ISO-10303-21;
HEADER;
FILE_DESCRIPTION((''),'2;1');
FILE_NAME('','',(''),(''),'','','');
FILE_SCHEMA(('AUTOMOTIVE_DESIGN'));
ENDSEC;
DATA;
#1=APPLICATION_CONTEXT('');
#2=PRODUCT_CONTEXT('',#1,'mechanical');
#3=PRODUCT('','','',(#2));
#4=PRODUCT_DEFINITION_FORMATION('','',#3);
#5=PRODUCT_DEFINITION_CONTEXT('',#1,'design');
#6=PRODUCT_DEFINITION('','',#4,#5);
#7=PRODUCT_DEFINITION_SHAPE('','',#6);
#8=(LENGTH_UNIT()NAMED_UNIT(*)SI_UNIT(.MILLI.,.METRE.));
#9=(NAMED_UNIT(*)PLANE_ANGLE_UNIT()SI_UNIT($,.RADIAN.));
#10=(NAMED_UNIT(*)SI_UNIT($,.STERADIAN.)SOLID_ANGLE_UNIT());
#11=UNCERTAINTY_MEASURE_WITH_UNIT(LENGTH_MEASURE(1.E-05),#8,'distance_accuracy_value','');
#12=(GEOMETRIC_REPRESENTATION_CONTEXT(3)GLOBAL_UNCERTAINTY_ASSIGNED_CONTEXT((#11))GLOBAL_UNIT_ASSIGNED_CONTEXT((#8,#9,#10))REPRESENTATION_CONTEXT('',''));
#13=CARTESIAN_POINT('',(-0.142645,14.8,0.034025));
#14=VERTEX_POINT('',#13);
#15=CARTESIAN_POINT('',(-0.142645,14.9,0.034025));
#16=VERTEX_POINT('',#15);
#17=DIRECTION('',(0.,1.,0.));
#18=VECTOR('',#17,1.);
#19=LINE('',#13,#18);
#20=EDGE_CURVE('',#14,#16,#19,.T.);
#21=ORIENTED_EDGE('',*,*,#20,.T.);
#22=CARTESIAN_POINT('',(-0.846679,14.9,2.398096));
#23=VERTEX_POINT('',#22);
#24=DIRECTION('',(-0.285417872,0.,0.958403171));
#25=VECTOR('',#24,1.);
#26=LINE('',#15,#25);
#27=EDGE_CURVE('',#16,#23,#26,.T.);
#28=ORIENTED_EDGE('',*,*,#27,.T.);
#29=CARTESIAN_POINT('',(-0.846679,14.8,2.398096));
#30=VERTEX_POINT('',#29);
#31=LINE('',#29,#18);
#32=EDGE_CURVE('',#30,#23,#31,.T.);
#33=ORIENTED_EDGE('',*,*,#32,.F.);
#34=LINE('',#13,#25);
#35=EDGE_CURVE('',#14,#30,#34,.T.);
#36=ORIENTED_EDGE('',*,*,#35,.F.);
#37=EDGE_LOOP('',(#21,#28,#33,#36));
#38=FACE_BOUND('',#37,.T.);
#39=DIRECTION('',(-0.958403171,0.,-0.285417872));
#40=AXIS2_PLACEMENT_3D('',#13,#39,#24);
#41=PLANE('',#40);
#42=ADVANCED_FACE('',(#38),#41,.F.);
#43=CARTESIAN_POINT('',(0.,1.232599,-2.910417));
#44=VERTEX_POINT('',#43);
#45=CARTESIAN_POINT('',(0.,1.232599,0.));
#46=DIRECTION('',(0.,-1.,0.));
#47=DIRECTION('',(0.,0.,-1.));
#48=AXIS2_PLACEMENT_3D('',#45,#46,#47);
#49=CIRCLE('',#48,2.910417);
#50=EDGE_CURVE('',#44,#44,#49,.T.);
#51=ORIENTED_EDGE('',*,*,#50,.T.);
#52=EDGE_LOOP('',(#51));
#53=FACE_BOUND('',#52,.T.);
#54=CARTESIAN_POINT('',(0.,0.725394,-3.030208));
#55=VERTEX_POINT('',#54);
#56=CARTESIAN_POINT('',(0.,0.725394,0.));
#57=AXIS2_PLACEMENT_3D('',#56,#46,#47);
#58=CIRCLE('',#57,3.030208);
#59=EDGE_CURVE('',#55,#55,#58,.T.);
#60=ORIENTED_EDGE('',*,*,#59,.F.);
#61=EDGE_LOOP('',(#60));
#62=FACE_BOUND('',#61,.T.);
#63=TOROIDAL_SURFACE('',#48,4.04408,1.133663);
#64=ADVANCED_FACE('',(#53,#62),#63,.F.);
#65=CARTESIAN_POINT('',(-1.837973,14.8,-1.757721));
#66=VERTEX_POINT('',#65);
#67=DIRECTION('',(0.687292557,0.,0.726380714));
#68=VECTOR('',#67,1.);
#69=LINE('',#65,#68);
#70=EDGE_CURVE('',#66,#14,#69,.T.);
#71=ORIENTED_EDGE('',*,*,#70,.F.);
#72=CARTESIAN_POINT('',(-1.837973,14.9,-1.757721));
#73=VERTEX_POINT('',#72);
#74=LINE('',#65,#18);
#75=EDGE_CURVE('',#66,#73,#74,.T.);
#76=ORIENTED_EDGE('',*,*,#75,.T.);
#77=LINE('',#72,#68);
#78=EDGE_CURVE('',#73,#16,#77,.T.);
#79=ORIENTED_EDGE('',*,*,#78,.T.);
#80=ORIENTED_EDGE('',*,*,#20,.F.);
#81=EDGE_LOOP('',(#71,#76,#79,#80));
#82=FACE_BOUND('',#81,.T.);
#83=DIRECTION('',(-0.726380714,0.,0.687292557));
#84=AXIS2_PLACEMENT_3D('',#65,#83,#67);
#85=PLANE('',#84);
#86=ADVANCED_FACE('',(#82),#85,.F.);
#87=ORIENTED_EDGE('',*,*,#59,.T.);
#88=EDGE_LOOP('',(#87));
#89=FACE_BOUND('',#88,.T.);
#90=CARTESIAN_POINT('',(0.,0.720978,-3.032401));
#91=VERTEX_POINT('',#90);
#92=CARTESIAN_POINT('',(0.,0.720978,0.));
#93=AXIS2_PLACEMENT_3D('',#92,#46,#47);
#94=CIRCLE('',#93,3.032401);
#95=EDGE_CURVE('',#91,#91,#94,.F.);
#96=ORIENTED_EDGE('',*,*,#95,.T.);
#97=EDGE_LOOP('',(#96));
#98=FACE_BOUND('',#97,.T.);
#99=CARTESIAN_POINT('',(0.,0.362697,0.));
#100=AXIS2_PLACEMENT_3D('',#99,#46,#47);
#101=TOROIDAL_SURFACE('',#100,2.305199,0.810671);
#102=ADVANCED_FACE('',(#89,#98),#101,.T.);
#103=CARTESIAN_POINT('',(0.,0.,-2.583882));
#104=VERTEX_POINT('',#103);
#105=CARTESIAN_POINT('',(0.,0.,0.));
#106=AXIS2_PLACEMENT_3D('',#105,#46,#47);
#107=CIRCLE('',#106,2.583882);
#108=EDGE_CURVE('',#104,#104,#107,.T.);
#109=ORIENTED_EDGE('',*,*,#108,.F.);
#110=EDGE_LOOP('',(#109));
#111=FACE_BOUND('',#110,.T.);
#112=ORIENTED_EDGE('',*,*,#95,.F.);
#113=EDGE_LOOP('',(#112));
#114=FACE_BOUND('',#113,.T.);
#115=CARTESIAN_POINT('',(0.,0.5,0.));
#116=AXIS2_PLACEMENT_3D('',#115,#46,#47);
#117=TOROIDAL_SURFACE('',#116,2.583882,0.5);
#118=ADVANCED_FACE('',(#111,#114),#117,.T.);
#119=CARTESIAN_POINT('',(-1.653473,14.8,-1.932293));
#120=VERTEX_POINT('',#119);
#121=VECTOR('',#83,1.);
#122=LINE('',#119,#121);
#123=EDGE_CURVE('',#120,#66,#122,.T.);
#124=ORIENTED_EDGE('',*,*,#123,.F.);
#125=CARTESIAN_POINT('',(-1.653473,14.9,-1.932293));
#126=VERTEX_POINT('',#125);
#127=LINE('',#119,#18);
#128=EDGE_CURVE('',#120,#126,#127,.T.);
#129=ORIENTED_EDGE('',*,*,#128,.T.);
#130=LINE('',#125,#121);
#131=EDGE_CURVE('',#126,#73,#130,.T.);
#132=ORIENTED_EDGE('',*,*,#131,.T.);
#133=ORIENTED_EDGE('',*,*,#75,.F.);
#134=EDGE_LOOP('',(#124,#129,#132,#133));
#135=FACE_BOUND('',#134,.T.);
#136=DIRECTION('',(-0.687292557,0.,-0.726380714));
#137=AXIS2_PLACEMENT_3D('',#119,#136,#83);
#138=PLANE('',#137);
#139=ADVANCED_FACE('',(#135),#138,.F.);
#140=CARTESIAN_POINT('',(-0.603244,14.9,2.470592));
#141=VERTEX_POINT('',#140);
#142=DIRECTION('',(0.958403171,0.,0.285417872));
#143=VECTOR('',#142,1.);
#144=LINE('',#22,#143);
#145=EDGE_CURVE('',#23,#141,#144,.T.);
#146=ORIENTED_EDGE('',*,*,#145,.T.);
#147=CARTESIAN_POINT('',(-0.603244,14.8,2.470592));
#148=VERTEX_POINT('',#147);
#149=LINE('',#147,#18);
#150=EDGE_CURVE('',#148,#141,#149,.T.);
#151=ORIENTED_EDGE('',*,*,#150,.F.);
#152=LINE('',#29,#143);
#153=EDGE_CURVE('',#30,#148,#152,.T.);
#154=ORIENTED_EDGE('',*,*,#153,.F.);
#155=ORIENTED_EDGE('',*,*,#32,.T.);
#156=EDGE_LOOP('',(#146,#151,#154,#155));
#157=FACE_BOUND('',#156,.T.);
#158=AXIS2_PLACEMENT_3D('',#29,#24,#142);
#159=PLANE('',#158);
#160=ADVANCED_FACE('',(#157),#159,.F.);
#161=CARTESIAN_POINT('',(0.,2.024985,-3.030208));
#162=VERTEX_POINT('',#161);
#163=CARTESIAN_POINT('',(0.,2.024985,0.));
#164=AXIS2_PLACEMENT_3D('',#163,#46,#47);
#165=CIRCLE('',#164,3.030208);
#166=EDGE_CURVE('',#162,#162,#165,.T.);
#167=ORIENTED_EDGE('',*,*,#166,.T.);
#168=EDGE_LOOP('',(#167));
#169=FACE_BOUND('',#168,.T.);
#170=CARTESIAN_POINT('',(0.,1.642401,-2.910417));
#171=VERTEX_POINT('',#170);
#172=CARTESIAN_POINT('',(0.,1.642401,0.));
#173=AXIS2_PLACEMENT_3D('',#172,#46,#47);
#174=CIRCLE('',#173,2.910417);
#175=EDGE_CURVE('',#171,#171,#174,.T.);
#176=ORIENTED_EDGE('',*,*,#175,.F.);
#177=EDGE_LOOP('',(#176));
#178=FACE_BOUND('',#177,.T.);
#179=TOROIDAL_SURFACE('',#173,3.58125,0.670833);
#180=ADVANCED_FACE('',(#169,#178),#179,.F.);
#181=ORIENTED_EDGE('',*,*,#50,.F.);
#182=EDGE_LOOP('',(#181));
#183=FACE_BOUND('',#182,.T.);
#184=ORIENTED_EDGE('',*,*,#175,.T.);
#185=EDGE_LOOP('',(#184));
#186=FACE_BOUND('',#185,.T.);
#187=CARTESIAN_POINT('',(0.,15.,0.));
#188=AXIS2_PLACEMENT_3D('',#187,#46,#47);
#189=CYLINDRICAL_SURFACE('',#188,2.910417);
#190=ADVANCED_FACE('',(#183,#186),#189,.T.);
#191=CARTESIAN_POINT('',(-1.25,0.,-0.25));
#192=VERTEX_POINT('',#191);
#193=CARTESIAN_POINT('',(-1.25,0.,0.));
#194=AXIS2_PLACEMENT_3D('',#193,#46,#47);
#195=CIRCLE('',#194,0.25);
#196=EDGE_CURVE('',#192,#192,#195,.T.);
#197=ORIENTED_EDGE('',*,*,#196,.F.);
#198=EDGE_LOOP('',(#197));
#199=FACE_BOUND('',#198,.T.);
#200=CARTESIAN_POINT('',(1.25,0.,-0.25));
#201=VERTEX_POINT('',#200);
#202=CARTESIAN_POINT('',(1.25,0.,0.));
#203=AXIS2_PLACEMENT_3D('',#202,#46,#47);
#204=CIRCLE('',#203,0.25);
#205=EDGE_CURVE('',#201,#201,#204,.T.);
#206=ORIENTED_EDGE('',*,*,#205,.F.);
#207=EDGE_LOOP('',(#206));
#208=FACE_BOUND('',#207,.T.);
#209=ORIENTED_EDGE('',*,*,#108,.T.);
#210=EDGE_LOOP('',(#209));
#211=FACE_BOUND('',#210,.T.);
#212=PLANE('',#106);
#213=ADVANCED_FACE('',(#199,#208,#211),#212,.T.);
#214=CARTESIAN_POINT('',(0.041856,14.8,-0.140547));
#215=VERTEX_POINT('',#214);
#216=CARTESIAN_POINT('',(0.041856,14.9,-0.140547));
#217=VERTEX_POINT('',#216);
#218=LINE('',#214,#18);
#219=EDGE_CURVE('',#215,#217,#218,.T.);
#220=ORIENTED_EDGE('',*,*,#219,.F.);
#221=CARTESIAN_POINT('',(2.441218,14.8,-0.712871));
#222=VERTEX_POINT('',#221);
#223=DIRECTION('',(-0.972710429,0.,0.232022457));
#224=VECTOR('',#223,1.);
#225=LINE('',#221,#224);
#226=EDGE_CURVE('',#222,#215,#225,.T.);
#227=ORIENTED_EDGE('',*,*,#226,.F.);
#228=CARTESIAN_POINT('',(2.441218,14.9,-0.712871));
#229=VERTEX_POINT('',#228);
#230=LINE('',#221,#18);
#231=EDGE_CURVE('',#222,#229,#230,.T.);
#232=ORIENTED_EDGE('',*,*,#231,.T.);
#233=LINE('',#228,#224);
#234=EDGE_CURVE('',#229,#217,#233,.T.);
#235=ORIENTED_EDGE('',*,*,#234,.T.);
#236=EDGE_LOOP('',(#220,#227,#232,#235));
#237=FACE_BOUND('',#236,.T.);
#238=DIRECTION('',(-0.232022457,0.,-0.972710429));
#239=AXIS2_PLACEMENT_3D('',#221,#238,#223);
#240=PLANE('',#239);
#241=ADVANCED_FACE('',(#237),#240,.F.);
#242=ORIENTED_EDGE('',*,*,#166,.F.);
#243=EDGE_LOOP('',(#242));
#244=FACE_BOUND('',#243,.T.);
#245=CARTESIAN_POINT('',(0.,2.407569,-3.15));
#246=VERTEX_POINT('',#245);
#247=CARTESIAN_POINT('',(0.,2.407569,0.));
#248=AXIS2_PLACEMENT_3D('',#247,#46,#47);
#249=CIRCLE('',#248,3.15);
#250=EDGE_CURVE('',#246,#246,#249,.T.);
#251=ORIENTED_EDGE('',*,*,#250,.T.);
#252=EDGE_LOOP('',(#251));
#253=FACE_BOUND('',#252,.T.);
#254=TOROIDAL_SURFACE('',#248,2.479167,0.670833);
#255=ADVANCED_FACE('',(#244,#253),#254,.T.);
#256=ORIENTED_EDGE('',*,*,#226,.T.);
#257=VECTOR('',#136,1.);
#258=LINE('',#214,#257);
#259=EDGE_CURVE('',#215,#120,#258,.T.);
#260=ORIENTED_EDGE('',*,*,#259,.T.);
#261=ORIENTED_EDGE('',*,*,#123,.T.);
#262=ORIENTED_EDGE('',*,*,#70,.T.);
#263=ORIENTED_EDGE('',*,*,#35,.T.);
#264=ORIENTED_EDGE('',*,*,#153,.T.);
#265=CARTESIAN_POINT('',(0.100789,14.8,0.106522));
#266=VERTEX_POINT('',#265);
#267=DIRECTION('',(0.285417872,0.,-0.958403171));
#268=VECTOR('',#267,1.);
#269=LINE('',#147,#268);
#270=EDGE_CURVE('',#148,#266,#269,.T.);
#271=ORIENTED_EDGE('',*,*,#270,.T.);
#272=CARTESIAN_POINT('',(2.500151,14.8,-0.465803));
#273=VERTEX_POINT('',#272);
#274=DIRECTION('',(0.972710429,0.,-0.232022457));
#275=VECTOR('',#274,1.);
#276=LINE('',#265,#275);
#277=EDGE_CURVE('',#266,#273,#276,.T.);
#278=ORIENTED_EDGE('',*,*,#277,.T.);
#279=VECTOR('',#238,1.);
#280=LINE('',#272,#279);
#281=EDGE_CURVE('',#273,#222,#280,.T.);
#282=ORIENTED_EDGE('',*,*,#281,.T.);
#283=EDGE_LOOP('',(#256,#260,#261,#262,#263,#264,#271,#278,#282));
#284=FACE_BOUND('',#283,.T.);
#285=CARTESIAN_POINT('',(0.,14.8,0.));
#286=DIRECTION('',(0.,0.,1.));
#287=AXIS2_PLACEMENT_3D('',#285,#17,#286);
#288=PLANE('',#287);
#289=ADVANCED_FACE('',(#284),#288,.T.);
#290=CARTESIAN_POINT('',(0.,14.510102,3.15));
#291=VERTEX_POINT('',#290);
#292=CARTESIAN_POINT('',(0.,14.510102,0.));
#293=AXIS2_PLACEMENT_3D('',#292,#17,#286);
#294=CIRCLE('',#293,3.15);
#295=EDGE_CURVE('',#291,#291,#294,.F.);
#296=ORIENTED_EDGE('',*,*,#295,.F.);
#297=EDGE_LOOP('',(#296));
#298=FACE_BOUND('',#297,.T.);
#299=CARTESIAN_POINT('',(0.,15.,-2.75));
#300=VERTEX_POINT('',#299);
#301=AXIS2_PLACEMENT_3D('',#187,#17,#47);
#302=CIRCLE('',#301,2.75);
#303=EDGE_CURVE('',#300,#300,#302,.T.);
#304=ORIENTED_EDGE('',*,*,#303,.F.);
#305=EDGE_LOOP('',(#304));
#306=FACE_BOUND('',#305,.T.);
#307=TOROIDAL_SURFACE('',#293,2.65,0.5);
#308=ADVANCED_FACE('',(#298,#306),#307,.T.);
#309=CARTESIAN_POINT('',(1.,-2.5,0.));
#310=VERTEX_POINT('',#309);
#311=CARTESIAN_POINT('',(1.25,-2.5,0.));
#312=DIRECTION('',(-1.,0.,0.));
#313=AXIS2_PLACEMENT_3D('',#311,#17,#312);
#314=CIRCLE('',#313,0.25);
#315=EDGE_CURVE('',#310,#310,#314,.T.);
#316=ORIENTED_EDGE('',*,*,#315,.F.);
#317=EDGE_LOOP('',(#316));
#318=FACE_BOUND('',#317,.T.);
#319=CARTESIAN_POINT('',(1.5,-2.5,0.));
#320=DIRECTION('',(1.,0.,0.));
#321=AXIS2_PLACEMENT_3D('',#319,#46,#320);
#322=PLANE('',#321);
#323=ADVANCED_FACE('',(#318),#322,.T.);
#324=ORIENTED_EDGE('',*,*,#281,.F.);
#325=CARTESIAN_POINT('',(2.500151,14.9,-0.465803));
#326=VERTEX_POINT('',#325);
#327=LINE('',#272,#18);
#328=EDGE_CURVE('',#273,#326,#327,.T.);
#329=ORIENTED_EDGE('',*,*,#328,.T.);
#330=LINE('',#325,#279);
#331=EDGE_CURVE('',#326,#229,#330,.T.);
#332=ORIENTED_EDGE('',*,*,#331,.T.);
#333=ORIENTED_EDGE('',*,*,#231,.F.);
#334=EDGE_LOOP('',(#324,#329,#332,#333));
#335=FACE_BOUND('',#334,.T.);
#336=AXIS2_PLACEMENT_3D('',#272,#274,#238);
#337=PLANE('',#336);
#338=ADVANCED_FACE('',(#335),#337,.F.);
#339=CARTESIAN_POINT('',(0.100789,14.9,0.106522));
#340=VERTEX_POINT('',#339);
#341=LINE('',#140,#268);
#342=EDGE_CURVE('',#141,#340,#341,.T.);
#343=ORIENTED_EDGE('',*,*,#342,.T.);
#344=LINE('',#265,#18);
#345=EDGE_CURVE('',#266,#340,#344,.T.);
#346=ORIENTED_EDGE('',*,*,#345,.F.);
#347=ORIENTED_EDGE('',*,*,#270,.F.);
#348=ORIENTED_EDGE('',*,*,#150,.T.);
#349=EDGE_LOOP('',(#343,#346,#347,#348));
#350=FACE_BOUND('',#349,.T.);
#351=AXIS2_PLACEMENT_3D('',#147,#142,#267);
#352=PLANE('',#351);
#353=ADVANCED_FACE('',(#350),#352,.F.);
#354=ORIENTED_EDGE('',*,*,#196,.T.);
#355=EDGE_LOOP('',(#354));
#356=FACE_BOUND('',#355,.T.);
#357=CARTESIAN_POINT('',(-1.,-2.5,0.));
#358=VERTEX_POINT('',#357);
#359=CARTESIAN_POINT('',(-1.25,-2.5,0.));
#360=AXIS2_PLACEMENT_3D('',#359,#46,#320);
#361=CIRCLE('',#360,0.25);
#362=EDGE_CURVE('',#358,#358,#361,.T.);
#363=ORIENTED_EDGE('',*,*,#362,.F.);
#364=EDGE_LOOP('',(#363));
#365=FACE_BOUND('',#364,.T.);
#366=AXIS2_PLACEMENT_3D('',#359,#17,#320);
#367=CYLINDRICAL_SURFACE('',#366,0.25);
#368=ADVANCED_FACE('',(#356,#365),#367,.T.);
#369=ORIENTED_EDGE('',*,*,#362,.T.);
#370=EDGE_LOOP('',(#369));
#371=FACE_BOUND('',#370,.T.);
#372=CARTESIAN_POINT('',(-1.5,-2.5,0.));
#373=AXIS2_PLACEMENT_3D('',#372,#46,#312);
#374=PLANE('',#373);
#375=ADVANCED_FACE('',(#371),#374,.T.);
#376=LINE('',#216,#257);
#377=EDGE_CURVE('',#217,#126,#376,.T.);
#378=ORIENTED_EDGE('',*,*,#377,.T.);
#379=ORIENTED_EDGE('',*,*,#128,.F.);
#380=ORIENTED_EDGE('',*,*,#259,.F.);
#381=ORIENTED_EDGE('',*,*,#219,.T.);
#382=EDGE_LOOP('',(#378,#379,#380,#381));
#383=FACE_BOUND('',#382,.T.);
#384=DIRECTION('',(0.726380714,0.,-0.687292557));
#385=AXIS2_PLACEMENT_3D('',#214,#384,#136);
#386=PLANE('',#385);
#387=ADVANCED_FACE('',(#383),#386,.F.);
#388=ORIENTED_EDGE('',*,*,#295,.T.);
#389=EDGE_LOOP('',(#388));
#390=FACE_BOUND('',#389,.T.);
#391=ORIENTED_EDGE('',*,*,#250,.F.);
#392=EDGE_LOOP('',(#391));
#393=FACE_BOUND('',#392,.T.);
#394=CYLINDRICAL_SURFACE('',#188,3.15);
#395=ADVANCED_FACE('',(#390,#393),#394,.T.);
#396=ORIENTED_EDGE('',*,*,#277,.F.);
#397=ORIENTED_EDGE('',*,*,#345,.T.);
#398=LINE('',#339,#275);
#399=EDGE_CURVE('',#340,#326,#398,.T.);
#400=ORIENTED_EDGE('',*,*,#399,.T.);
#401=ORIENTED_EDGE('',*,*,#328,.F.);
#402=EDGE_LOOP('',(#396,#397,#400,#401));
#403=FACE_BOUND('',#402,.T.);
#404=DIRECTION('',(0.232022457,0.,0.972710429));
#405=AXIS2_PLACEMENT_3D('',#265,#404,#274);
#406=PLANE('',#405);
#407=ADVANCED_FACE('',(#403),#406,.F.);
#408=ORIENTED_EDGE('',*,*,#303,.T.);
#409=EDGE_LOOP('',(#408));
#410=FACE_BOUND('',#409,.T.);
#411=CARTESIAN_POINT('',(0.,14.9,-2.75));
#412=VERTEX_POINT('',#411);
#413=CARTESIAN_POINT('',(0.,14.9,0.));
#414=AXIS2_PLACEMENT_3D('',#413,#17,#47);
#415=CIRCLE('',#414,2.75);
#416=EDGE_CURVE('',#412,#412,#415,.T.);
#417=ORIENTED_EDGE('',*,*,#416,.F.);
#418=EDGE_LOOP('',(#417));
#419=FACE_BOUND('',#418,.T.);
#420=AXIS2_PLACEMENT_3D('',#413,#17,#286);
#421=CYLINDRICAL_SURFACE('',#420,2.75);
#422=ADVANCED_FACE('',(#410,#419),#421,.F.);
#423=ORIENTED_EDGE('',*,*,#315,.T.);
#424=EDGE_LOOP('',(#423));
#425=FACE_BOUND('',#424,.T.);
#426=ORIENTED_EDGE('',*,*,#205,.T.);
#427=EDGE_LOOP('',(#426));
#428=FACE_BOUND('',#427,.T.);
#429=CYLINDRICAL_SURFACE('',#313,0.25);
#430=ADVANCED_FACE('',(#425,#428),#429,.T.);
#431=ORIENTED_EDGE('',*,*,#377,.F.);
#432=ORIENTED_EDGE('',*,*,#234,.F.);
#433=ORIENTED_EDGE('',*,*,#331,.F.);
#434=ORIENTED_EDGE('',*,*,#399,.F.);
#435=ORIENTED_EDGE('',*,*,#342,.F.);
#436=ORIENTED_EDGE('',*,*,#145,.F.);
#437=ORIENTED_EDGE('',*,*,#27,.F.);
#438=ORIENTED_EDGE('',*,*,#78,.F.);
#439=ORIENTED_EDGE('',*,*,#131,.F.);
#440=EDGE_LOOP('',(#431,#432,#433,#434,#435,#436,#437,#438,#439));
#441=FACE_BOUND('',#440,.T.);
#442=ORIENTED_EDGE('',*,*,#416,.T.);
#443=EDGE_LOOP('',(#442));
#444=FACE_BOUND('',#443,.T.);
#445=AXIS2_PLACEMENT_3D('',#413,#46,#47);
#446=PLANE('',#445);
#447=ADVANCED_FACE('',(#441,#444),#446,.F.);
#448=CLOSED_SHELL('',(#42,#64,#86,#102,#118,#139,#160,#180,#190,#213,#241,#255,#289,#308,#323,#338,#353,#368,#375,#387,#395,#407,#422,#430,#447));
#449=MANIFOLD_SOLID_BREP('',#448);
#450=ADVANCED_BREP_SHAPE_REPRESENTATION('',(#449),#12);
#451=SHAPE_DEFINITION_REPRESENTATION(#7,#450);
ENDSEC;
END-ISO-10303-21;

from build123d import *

# Parameters (mm, degrees)
SKETCH2_R          = 2.75
CUT_EXTRUDE1_DEPTH = 0.1
CUT_EXTRUDE2_DEPTH = 0.1
FILLET1_R          = 0.5
SKETCH4_W          = 0.25
SKETCH4_H          = 2.5


with BuildPart() as part:
    # Sketch1 → Revolve1 (revolve)
    with BuildSketch(Plane.XY, mode=Mode.PRIVATE) as revolve1_sk:
        with BuildLine():
            Line((3.15, 15), (0, 15))
            Line((0, 15), (0, 0))
            Line((0, 0), (3.030208333, 0))
            ThreePointArc((3.030208333, 0), (3.115870139, 0.362697063), (3.030208333, 0.725394126))
            ThreePointArc((3.030208333, 0.725394126), (2.940770958, 0.972019442), (2.910416667, 1.232599004))
            Line((2.910416667, 1.232599004), (2.910416667, 1.642400996))
            ThreePointArc((2.910416667, 1.642400996), (2.941064683, 1.842850794), (3.030208333, 2.024984899))
            ThreePointArc((3.030208333, 2.024984899), (3.119351983, 2.207119004), (3.15, 2.407568802))
            Line((3.15, 2.407568802), (3.15, 15))
        make_face()
    revolve(revolve1_sk.sketch.rotate(Axis((0, 15, 0), (0, -1, 0)), 270), axis=Axis((0, 15, 0), (0, -1, 0)))

    # Sketch2 → Cut-Extrude1 (cut)
    with BuildSketch(Plane(origin=(0, 15, 0), x_dir=(-1, 0, 0), z_dir=(0, 1, 0))):
        with Locations(Location((0, 0, 0), (0, 0, 270))):
            Circle(SKETCH2_R)
    extrude(amount=-CUT_EXTRUDE1_DEPTH, mode=Mode.SUBTRACT)

    # Sketch3 → Cut-Extrude2 (cut)
    with BuildSketch(Plane(origin=(0, 14.9, 0), x_dir=(-1, 0, 0), z_dir=(0, 1, 0))):
        Polygon((1.653472744, -1.932293167), (1.837973446, -1.757720858), (0.142645036, 0.03402539), (0.846678598, 2.398095985), (0.603244193, 2.470592124), (-0.10078937, 0.10652153), (-2.500151342, -0.465802817), (-2.441217638, -0.712871266), (-0.041855666, -0.14054692), align=None)
    extrude(amount=-CUT_EXTRUDE2_DEPTH, mode=Mode.SUBTRACT)

    # Fillet1
    # the kernel refuses this fillet: 0.5 mm, written as the material it takes off along each edge
    with BuildSketch(Plane(origin=(0, 15, 0), x_dir=(0, 0, -1), z_dir=(-1, 0, 0))) as fillet1_piece_1:
        with BuildLine():
            CenterArc((2.65, 0.489897949), FILLET1_R, 281.536959033, 78.463040967)
            Line((3.15, 0.489897949), (3.16, 0.489897949))
            Line((3.16, 0.489897949), (3.16, 0))
            Line((3.16, 0), (3.15, -0.01))
            ThreePointArc((3.15, -0.01), (2.95, -0.01), (2.752, -0.009797959))
            Line((2.752, -0.009797959), (2.75, 0))
        make_face()
    revolve(axis=Axis((0, 15, 0), (0, -1, 0)), mode=Mode.SUBTRACT)
    with BuildSketch(Plane(origin=(0, 0, 0), x_dir=(0, 0, -1), z_dir=(-1, 0, 0))) as fillet1_piece_2:
        with BuildLine():
            CenterArc((2.583882439, -0.5), FILLET1_R, 333.771257748, 116.228742252)
            Line((2.583882439, 0), (2.583882439, 0.01))
            Line((2.583882439, 0.01), (3.030208333, 0.01))
            Line((3.030208333, 0.01), (3.039151656, 0.004474035))
            ThreePointArc((3.039151656, 0.004474035), (3.125866344, -0.360201414), (3.041371195, -0.725397511))
            Line((3.041371195, -0.725397511), (3.032400827, -0.720977952))
        make_face()
    revolve(axis=Axis((0, 0, 0), (0, -1, 0)), mode=Mode.SUBTRACT)

    # Sketch4 → Revolve2 (revolve)
    with BuildSketch(Plane(origin=(0, 0, 0), x_dir=(-1, 0, 0), z_dir=(0, 0, -1)), mode=Mode.PRIVATE) as revolve2_sk:
        with Locations((-1.375, -1.25)):
            Rectangle(SKETCH4_W, SKETCH4_H)
    revolve2 = revolve(revolve2_sk.sketch.rotate(Axis((1.25, -2.5, 0), (0, 1, 0)), 180), axis=Axis((1.25, -2.5, 0), (0, 1, 0)))

    # Simetría2: Revolve2 across plane
    add(revolve2.mirror(Plane(origin=(0, 0, 0), x_dir=(0, 0, 1), z_dir=(1, 0, 0))))


solid = part.part
